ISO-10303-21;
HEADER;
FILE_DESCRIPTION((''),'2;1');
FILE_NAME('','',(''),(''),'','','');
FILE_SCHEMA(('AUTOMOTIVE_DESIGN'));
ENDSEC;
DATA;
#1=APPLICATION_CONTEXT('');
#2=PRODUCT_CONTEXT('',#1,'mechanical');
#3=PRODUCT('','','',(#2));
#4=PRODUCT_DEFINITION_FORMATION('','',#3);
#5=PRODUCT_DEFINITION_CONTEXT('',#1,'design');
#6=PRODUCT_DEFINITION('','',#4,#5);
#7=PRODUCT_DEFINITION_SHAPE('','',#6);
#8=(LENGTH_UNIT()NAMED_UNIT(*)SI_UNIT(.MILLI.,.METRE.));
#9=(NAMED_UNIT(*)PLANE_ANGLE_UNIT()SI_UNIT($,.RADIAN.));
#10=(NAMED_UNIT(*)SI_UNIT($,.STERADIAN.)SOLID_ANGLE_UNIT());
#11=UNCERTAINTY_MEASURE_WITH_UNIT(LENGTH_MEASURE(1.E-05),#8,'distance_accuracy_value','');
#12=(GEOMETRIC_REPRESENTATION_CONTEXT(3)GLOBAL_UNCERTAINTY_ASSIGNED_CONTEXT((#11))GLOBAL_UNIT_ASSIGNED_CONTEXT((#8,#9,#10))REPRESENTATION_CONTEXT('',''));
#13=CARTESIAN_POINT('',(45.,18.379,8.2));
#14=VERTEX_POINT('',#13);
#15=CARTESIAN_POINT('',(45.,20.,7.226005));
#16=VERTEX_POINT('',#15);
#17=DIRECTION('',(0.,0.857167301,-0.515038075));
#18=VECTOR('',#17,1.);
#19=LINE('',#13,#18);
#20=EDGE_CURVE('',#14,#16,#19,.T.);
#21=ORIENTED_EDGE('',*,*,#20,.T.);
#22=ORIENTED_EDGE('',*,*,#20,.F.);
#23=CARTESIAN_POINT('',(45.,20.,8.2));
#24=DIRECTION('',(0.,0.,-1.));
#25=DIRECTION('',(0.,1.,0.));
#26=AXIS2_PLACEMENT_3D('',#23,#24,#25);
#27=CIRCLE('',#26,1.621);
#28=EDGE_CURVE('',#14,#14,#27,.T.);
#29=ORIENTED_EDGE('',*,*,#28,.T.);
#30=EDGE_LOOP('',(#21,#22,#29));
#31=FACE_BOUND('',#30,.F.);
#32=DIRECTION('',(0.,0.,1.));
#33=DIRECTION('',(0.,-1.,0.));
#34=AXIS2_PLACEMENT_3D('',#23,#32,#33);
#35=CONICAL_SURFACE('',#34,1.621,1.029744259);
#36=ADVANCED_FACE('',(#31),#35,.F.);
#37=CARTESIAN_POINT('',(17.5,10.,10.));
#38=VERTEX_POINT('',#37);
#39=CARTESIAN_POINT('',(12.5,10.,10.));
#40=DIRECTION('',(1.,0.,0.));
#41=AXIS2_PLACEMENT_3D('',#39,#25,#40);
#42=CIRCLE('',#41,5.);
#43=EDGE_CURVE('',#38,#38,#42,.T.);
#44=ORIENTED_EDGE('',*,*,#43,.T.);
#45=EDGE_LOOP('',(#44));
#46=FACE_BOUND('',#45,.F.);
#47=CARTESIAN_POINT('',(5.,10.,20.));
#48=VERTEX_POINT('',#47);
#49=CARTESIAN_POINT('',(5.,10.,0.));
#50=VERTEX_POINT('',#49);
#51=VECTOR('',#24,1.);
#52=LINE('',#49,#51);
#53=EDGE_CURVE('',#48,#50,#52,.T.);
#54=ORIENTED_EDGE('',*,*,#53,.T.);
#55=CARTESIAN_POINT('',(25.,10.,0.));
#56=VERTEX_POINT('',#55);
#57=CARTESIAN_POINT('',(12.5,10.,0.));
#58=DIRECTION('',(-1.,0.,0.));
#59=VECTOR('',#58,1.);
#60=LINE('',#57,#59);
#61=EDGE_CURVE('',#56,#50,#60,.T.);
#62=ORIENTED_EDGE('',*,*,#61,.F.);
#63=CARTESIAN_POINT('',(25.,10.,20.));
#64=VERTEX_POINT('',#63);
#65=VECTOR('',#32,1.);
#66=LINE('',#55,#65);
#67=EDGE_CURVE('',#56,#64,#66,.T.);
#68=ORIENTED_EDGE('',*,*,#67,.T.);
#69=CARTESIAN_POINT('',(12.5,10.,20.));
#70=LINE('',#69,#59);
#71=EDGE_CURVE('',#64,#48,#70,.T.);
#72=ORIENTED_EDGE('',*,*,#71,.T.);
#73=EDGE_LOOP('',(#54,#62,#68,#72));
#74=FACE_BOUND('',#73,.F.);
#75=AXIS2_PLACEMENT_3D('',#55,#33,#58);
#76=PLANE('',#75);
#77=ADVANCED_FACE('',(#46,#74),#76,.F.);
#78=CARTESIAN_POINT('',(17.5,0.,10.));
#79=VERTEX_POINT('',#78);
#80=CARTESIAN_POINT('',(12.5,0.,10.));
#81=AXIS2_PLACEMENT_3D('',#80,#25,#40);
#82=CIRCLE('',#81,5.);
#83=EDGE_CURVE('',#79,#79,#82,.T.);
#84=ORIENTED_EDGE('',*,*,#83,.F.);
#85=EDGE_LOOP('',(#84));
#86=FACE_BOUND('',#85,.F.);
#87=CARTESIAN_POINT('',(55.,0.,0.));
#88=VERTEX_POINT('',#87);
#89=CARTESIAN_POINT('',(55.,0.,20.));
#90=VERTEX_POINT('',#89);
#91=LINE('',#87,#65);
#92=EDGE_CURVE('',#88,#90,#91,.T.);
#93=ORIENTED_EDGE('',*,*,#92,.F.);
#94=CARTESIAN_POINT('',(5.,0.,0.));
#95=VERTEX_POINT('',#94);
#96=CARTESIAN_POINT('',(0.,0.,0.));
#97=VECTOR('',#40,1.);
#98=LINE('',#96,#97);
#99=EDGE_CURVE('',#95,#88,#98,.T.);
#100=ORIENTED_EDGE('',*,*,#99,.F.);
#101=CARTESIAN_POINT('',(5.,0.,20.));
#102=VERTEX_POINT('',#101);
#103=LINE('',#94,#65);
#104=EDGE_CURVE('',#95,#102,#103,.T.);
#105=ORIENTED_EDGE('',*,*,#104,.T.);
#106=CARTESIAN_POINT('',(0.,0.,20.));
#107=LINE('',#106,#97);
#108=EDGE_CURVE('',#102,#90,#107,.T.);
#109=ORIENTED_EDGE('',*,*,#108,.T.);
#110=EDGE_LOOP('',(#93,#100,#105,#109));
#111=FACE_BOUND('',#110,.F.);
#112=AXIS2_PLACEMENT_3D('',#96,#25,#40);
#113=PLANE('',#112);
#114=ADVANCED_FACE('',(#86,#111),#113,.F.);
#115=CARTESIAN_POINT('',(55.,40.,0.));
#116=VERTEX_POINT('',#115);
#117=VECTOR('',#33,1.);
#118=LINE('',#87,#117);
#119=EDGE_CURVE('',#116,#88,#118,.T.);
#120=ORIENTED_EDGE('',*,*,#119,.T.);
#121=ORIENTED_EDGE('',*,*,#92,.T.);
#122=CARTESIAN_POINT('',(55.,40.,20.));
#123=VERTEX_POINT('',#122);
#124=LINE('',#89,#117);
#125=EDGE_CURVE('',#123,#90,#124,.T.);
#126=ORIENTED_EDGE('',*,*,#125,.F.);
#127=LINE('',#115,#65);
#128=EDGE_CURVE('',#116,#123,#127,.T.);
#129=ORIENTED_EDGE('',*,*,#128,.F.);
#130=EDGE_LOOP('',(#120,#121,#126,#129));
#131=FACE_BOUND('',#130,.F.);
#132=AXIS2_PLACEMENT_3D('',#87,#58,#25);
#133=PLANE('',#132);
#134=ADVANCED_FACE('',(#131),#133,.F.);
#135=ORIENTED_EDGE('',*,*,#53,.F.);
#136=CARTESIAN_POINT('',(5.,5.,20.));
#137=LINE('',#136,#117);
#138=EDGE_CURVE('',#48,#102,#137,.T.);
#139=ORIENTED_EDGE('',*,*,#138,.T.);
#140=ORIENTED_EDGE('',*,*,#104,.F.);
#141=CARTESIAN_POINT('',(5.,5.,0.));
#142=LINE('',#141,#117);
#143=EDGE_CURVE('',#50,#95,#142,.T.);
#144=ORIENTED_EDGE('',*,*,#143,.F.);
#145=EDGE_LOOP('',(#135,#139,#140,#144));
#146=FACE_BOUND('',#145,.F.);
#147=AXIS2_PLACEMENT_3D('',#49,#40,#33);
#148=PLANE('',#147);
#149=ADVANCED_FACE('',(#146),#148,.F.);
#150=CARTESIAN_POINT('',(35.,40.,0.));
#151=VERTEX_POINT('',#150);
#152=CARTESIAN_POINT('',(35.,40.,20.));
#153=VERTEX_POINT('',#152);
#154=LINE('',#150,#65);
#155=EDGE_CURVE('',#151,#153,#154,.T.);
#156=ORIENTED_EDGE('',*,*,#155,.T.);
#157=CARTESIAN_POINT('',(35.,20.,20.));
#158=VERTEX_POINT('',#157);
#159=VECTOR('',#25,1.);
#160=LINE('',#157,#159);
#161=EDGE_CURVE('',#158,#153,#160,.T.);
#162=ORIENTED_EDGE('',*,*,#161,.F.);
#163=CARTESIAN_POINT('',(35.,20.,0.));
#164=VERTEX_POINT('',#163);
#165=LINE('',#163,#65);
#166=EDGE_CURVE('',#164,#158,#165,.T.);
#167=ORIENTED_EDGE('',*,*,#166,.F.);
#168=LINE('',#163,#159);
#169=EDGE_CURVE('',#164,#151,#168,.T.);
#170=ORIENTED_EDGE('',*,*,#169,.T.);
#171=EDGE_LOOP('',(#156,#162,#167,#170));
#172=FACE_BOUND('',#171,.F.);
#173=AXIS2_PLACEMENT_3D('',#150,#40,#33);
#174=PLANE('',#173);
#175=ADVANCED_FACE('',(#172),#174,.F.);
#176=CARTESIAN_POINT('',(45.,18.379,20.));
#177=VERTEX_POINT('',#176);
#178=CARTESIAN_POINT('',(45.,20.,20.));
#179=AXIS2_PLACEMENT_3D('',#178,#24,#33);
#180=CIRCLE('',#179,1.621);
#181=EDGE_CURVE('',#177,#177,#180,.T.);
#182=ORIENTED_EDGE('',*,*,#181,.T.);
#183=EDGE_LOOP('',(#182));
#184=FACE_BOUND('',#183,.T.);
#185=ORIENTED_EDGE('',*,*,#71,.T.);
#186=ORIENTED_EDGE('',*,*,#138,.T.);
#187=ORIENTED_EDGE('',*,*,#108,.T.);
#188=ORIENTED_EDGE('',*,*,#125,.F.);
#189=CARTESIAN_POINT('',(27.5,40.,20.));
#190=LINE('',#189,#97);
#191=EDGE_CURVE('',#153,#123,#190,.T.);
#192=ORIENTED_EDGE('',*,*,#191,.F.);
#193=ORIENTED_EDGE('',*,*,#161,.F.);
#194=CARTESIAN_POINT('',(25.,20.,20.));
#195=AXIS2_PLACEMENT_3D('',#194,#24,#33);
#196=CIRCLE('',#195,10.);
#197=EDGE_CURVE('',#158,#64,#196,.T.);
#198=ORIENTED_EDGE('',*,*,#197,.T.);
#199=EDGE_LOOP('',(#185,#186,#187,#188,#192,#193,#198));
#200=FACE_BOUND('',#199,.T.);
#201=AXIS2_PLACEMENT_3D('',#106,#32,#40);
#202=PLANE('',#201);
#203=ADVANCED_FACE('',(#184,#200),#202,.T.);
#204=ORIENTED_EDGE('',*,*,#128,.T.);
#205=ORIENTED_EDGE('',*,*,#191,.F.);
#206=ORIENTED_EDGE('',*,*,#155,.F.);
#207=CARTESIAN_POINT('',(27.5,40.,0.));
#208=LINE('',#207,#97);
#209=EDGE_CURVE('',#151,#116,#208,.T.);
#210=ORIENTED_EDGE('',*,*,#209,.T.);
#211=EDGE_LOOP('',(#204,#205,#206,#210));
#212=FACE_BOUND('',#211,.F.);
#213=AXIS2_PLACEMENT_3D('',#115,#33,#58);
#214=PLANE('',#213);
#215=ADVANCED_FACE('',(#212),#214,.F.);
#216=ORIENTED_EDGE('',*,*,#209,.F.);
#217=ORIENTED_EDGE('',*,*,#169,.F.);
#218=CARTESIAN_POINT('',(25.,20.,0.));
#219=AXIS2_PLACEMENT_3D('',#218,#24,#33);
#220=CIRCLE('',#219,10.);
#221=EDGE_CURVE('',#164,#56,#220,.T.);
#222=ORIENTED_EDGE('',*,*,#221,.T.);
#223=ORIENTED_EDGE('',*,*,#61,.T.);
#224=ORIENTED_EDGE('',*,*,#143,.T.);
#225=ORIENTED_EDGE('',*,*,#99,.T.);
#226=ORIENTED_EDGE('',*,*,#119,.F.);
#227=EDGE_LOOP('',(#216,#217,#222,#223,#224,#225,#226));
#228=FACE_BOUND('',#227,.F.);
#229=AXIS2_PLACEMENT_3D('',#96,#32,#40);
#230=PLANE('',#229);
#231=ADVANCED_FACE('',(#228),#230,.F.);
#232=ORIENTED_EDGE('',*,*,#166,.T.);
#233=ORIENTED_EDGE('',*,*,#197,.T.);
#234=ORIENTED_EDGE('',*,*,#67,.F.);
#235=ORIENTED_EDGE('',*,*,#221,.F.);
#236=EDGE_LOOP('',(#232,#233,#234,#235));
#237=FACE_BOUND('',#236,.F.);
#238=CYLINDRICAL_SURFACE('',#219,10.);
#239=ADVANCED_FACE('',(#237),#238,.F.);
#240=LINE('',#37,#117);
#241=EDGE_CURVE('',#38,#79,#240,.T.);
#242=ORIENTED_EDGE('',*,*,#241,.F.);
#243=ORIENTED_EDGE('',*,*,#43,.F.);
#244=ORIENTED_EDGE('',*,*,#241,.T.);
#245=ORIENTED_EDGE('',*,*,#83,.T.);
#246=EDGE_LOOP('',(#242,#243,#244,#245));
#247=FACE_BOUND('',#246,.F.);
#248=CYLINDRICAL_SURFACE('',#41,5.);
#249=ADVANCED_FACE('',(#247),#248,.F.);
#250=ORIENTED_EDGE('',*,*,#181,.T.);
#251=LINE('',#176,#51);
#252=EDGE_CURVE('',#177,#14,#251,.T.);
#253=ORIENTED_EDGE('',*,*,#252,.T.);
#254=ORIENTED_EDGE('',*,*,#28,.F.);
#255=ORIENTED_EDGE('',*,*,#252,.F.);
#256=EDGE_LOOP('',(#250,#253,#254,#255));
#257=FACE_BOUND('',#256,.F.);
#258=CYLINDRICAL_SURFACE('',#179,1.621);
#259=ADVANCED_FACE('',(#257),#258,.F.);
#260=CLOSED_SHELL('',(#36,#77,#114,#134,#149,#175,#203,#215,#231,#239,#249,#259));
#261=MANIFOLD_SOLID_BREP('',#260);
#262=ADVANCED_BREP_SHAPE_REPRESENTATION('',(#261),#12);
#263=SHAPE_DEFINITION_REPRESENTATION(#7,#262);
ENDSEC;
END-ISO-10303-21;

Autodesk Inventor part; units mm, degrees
ref_plane "YZ Plane" through (0, 0, 0) normal (1, 0, 0) x (0, 1, 0)
ref_plane "XZ Plane" through (0, 0, 0) normal (0, 1, 0) x (-1, 0, 0)
ref_plane "XY Plane" through (0, 0, 0) normal (0, 0, 1) x (1, 0, 0)
sketch "Bracket Short" plane through (0, 0, 0) normal (0, 0, 1) x (1, 0, 0)
  line L0 (0, 0) -> (30, 0)
  line L1 (25, 10) -> (0, 10)
  line L2 (0, 10) -> (0, 0)
  line L3 (30, 0) -> (55, 0)
  line L4 (55, 0) -> (55, 40)
  line L5 (55, 40) -> (35, 40)
  line L6 (35, 40) -> (35, 20)
  arc A0 (25, 10) -> (35, 20) centre (25, 20) ccw
  point P0 (35, 10)
  dimension "d0" = 35
  dimension "d2" = 20
  dimension "d3" = 40
  dimension "d4" = 10
  dimension "d10" = 10
extrude "Extrusion1" add sketch "Bracket Short" along normal blind 20
sketch "Clearance Hole (M6-8)" plane through (0, 10, 0) normal (0, 1, 0) x (1, 0, 0)
  circle A0 centre (12.5, -10) radius 5
  point P0 (0, 0)
  dimension "d7" = 10
extrude "Extrusion2" cut sketch "Clearance Hole (M6-8)" against normal through all
sketch "Sketch4" plane through (0, 0, 20) normal (0, 0, 1) x (1, 0, 0)
  circle A0 centre (45, 20) radius 1.621 projected
  circle A1 centre (45, 20) radius 1.621
  point P0 (0, 0)
hole "Hole2" at (45, 20, 20) direction (0, 0, -1) diameter 3.242 depth 11.8 tip angle 118 thread size "M4x0.7" class "6H" standard "ANSI Metric M Profile"
move faces "Move1" translate (5, 0, 0) faces at (0, 6.6667, 6.6667)
properties part number "Bracket_Short2" material "Aluminum, Anodized Silver"
